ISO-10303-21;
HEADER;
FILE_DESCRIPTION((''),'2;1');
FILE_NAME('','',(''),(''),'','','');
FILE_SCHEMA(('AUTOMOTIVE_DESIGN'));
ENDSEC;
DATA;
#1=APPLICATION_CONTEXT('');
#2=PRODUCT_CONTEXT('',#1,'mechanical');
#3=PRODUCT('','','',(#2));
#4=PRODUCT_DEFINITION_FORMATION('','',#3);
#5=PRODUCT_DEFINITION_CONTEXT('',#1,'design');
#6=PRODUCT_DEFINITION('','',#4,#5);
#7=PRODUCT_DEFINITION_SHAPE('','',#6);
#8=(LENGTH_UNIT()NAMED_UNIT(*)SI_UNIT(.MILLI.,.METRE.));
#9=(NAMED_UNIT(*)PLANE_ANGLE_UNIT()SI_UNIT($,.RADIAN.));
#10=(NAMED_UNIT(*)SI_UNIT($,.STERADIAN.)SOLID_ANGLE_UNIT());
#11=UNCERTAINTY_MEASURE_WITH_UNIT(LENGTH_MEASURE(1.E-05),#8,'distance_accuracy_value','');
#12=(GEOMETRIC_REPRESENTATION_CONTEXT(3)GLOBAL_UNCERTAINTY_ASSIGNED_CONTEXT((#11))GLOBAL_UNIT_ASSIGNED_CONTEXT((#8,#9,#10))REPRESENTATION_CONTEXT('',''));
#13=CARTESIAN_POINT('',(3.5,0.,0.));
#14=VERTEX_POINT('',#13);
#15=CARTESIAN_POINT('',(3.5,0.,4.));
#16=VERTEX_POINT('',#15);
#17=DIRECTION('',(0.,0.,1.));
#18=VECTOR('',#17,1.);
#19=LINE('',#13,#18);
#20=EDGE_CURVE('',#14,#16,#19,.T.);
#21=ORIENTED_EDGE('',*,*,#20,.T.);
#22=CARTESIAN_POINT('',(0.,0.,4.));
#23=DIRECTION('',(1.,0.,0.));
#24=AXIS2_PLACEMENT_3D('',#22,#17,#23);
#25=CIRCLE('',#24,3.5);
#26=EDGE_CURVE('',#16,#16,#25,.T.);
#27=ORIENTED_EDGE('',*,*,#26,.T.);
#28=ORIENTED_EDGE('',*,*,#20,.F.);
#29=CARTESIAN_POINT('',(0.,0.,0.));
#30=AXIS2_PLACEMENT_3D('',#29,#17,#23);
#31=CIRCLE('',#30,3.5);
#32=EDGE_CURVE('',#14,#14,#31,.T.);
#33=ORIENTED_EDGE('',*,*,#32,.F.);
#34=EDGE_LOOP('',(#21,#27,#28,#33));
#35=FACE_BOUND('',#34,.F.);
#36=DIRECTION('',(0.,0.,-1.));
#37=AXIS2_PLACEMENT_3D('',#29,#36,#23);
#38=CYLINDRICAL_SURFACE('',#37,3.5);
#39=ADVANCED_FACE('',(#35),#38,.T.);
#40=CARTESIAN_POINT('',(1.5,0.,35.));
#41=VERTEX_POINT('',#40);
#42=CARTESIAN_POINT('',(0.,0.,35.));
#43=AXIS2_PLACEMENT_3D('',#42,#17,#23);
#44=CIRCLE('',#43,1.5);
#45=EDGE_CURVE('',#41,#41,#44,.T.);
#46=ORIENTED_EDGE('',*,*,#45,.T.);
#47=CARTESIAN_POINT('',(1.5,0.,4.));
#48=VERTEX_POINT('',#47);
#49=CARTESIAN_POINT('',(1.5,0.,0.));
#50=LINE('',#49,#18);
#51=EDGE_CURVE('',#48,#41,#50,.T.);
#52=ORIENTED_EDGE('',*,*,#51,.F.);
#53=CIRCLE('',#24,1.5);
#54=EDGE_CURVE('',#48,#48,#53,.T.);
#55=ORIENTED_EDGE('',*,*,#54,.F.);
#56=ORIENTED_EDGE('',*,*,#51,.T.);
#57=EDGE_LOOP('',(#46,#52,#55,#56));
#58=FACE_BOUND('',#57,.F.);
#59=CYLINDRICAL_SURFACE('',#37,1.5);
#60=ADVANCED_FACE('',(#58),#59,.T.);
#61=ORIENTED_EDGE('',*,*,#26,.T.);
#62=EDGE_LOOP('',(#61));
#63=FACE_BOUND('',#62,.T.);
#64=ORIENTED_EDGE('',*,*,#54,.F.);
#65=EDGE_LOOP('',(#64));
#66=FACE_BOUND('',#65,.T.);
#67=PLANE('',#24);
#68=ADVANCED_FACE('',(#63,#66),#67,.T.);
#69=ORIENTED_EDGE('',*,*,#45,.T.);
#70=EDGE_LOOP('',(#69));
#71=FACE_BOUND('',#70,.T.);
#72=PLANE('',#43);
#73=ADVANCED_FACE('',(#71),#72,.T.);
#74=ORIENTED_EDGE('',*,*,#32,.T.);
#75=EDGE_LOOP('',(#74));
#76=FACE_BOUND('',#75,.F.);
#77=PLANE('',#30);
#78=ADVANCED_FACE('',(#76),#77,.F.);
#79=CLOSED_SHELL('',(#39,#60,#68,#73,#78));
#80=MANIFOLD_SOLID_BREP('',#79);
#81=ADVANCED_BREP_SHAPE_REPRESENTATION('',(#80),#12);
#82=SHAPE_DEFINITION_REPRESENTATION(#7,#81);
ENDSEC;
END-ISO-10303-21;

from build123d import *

# Parameters (mm, degrees)
F0_R     = 1.5
F1_DEPTH = 35
F0_R_2   = 3.5
F2_DEPTH = 4


# Not quite as in the source:
# - a feature names something its author has since deleted; it is built from what else it names


with BuildPart() as f1:
    # F0 (on Top) → F1 (new body)
    with BuildSketch(Plane.XY):
        Circle(F0_R)
    extrude(amount=F1_DEPTH)

    # F0 (on Top) → F2 (join)
    with BuildSketch(Plane.XY):
        Circle(F0_R_2)
        Circle(F0_R, mode=Mode.SUBTRACT)
    extrude(amount=F2_DEPTH)


solid = f1.part
